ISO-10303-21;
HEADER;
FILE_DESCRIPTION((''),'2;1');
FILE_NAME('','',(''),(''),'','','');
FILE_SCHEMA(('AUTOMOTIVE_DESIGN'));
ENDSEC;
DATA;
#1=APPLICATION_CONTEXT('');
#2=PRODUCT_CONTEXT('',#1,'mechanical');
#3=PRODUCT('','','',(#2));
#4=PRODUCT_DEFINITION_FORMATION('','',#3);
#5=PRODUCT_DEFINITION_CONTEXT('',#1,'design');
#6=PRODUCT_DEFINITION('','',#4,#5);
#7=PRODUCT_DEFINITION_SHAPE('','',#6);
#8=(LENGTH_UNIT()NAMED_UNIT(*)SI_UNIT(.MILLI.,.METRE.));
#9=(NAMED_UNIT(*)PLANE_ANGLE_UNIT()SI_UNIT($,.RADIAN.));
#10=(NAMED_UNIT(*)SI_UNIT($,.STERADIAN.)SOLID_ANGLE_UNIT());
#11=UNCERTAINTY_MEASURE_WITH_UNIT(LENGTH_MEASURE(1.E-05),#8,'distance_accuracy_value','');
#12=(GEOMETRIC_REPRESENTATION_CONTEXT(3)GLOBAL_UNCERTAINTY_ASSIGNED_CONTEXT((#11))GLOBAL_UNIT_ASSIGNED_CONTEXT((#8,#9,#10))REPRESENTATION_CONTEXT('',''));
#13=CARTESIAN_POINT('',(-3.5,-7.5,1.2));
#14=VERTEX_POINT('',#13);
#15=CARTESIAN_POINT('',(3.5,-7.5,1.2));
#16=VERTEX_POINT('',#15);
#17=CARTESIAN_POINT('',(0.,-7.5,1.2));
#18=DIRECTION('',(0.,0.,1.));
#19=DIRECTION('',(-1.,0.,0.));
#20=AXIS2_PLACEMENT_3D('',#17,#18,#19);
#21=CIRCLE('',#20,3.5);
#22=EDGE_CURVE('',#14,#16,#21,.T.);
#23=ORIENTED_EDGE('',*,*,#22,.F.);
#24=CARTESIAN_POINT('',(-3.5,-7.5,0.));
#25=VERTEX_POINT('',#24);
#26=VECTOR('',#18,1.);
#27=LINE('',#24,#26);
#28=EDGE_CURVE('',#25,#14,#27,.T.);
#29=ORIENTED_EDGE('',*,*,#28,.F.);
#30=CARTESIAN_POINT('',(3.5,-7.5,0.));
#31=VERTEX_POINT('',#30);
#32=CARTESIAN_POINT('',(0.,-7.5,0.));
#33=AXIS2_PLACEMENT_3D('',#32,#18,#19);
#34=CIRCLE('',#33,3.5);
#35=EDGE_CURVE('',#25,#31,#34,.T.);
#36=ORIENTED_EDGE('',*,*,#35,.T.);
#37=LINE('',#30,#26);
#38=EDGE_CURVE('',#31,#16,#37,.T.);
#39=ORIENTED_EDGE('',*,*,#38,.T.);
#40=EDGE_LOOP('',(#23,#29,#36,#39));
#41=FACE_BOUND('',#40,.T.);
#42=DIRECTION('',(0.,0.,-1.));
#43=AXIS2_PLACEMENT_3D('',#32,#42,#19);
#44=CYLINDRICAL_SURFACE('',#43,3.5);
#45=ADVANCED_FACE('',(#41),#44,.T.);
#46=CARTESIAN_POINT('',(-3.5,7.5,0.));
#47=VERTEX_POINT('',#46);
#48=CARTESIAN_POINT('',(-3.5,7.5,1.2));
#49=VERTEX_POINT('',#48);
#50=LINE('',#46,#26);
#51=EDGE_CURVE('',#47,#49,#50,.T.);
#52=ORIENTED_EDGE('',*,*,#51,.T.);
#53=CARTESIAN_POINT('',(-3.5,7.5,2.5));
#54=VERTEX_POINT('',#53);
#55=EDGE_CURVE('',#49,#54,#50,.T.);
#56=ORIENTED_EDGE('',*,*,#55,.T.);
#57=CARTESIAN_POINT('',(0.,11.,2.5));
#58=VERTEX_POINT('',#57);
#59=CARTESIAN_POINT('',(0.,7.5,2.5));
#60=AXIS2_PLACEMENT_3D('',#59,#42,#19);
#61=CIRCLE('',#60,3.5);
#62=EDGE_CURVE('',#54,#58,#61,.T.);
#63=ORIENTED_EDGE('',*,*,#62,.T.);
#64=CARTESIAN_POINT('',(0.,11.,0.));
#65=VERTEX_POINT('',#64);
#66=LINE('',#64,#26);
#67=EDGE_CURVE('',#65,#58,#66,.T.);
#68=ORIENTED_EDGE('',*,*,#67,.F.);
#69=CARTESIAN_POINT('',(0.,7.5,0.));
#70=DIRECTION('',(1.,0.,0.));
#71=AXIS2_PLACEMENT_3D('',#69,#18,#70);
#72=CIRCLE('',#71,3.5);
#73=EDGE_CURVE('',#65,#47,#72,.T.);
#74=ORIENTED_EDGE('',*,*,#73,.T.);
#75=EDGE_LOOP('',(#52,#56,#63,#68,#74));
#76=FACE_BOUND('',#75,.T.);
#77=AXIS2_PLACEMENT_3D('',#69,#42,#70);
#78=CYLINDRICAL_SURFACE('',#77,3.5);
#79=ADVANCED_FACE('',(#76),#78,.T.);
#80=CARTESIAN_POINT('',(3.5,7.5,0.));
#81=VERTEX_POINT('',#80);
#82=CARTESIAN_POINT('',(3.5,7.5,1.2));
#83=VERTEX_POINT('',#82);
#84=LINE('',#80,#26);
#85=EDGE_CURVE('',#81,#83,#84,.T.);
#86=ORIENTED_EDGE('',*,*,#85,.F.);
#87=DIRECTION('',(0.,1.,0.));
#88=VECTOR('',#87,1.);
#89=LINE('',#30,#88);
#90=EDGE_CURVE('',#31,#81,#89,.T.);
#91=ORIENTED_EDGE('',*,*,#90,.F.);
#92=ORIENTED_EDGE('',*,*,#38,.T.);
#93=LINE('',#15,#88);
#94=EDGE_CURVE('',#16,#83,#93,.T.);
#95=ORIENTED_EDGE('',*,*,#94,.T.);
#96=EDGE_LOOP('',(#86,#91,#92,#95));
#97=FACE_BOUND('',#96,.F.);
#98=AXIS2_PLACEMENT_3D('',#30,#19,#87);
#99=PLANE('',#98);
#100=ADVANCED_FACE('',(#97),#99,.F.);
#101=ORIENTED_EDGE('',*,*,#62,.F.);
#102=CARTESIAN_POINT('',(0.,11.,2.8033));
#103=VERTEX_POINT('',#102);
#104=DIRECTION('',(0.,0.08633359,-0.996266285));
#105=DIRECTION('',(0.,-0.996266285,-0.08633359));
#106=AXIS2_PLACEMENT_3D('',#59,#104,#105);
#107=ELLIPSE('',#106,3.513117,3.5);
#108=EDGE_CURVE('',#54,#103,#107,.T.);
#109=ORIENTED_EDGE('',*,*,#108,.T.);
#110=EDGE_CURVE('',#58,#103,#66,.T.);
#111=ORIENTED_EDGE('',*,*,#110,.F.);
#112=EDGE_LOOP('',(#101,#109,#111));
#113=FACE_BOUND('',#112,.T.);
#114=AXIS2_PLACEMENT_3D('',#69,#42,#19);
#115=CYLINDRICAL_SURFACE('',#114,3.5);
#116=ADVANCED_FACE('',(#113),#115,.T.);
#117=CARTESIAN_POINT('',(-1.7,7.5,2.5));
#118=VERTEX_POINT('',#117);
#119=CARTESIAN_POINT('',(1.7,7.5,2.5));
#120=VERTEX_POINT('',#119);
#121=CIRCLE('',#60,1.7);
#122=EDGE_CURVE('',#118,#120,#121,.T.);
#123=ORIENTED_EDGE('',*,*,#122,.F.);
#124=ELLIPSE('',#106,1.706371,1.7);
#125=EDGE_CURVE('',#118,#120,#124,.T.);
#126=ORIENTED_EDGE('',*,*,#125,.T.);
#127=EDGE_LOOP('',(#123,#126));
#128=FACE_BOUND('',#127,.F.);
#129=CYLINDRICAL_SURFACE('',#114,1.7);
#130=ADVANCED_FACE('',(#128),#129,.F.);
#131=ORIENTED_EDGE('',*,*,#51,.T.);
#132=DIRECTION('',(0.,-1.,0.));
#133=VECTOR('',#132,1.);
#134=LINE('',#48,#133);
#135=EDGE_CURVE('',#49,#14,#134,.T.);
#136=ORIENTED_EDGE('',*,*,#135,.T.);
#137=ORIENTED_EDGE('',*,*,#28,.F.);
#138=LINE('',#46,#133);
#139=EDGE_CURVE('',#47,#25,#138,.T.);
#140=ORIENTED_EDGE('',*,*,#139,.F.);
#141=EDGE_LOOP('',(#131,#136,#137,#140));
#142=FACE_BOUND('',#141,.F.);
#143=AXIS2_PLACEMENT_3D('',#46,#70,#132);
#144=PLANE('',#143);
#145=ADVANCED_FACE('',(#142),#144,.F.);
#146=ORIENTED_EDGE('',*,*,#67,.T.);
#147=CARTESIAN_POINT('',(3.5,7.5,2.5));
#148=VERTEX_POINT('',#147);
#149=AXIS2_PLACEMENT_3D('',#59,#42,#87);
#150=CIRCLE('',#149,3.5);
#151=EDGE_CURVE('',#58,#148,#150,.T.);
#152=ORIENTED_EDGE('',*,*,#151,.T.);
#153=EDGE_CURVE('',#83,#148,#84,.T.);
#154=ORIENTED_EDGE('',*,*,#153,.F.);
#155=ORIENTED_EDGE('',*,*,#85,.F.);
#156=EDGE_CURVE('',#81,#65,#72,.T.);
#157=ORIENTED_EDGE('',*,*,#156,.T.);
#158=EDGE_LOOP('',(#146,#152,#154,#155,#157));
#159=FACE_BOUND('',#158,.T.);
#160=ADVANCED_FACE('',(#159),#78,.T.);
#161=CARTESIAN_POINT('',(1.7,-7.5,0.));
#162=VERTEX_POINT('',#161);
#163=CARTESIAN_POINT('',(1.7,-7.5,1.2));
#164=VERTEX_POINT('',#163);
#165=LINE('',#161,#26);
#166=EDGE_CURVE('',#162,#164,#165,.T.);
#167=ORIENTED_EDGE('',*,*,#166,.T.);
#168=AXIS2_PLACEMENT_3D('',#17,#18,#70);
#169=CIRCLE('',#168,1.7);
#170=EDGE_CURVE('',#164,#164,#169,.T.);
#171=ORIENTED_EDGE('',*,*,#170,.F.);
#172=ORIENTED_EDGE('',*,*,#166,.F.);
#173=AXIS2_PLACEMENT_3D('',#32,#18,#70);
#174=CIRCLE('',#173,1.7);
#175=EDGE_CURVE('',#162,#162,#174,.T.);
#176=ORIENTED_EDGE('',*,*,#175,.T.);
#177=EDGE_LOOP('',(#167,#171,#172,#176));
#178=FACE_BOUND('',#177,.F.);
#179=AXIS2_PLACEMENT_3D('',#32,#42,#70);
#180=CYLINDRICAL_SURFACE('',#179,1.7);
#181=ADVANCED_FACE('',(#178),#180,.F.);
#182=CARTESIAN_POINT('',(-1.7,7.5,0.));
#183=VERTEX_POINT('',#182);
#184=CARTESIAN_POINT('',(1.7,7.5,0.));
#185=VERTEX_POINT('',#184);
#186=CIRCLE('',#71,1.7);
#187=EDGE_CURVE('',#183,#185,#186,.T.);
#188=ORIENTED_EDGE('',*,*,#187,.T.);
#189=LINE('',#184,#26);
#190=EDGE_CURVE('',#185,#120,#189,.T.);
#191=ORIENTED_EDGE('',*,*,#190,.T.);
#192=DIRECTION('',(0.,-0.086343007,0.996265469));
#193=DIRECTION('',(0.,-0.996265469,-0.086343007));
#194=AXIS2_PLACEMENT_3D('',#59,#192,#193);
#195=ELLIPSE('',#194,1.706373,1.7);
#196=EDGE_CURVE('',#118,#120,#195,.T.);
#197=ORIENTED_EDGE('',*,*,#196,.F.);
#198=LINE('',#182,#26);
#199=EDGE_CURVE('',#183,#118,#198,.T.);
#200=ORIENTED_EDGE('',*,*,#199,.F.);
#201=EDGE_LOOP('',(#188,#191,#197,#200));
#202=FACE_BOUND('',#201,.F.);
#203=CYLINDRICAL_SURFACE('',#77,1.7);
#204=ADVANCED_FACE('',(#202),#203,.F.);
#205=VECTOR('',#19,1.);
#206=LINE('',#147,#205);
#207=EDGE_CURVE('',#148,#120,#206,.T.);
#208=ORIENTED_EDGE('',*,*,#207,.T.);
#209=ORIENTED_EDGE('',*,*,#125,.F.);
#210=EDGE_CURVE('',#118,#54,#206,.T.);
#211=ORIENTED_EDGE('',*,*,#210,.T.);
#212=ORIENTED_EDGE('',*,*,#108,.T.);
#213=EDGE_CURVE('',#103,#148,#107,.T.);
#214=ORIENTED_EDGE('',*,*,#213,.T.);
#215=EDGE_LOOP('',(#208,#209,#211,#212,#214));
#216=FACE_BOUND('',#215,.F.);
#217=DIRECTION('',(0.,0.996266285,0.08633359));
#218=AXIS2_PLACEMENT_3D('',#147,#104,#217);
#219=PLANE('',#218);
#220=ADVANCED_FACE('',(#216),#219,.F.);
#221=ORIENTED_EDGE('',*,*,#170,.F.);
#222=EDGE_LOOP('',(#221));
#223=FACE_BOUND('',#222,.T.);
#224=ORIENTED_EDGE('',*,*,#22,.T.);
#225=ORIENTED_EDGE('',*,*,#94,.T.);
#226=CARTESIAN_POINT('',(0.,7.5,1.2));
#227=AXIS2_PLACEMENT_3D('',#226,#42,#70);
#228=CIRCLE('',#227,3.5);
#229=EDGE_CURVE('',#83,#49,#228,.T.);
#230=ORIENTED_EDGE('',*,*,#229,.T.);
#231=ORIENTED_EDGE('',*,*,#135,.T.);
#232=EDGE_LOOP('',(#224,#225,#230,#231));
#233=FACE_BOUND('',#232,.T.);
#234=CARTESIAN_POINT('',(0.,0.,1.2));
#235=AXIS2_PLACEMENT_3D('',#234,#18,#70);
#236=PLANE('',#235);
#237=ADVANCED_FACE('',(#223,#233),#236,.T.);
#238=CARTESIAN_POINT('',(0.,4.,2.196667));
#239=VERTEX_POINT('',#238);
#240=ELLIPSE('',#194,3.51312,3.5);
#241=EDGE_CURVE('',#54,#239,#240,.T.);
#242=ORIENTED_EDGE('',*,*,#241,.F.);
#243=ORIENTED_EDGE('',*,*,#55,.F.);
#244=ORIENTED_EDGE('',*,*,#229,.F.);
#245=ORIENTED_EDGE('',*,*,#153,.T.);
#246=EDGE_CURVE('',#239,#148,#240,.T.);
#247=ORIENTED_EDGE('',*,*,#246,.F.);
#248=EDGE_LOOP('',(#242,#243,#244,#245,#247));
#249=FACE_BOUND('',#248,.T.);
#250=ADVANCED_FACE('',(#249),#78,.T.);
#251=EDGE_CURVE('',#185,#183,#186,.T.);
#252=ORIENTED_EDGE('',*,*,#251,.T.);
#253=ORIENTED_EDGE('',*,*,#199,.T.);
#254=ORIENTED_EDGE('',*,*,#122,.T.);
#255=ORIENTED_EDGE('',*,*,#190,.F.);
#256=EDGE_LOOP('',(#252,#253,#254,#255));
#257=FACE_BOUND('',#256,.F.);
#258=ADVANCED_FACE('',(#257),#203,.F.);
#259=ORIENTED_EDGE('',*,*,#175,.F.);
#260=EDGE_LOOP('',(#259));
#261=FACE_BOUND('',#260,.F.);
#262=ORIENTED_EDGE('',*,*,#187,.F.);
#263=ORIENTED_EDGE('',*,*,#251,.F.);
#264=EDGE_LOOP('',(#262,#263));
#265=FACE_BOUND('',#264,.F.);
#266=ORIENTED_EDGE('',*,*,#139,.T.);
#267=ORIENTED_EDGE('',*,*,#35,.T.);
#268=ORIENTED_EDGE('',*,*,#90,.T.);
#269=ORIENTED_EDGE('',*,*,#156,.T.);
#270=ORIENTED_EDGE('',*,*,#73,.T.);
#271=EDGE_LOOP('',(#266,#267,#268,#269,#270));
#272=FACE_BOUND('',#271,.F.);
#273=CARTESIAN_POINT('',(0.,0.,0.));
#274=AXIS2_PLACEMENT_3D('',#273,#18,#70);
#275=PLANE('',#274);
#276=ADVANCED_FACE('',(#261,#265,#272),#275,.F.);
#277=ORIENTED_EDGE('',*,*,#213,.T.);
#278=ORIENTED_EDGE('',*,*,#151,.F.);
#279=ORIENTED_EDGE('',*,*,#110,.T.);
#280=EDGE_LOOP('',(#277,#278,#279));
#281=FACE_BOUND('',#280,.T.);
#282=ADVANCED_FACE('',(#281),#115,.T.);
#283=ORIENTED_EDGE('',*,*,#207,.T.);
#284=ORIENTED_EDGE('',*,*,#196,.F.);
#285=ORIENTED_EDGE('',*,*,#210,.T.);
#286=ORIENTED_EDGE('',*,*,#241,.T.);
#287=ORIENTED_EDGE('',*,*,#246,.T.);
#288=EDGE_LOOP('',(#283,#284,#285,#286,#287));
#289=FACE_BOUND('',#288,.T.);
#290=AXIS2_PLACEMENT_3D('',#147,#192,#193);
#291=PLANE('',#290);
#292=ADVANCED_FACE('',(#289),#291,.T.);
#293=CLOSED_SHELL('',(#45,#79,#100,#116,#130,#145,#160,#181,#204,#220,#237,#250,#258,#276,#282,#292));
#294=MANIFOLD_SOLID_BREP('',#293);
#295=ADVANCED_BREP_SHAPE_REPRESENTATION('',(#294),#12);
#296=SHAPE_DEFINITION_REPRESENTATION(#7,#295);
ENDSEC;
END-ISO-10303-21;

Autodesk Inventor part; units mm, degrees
ref_plane "YZ Plane" through (0, 0, 0) normal (1, 0, 0) x (0, 1, 0)
ref_plane "XZ Plane" through (0, 0, 0) normal (0, 1, 0) x (-1, 0, 0)
ref_plane "XY Plane" through (0, 0, 0) normal (0, 0, 1) x (1, 0, 0)
sketch "Náčrt1" plane through (0, 0, 0) normal (0, 0, 1) x (1, 0, 0)
  line L0 (0, 7.5) -> (0, -7.5) construction
  line L1 (-3.5, 7.5) -> (-3.5, -7.5)
  line L2 (3.5, -7.5) -> (3.5, 7.5)
  arc A0 (3.5, 7.5) -> (-3.5, 7.5) centre (0, 7.5) ccw
  arc A1 (-3.5, -7.5) -> (3.5, -7.5) centre (0, -7.5) ccw
  circle A2 centre (0, 7.5) radius 1.7
  circle A3 centre (0, -7.5) radius 1.7
  circle A4 centre (0, 7.5) radius 3.5
  point P0 (0, 0)
  point P1 (0, 0)
  point P2 (3.5, 7.5)
  dimension "d0" = 15
  dimension "d1" = 3.5
  dimension "d2" = 3.4
extrude "Vysunutí1" add sketch "Náčrt1" along normal blind 1.2
extrude "Vysunutí2" add sketch "Náčrt1" along normal blind 2.5 contours A0 A4
sketch "Náčrt4" plane through (3.5, -7.5, 0) normal (1, 0, 0) x (0, 0, -1)
  line L0 (-2.5, 13.3) -> (-2.5, 16.7) projected
  line L1 (-1.2, -1.7) -> (-1.2, 1.7) projected
  line L2 (-2.5, 15) -> (-1.2, 0)
  line L3 (-2.5, 18.5) -> (-2.5, 11.5) projected
  line L4 (0, 15) -> (0, 15) projected
  line L5 (0, 15) -> (-1.2, 15) projected
  line L6 (-1.2, 15) -> (-1.2, 15) projected
  line L7 (0, 15) -> (-1.2, 15) projected
  line L8 (-1.2, 11.5) -> (-2.5, 11.5) projected
  line L9 (-2.5, 15) -> (-2.8033, 18.5)
  line L10 (-2.5, 18.5) -> (-2.8033, 18.5)
  point P0 (0, 7.5)
  point P1 (-2.1967, 11.5)
extrude "Vysunutí3" cut sketch "Náčrt4" against normal through all contours L0 L2 L8 L3
extrude "Vysunutí4" add sketch "Náčrt4" against normal up to surface (7 mm away) contours L9 L10 L3 L0
sketch "Náčrt5" plane through (0, 0, 0) normal (0, 0, -1) x (-1, 0, 0)
  circle A0 centre (0, 7.5) radius 1.7 projected
  circle A1 centre (0, -7.5) radius 1.7 projected
  line L0 (-3.5, -7.5) -> (-3.5, 7.5) projected
  arc A2 (-3.5, -7.5) -> (3.5, -7.5) centre (0, -7.5) ccw projected
  line L1 (3.5, 7.5) -> (3.5, -7.5) projected
  arc A3 (3.5, 7.5) -> (-3.5, 7.5) centre (0, 7.5) ccw projected
  arc A4 (1.7, 7.5) -> (-1.7, 7.5) centre (0, 7.5) ccw projected
  line L2 (-1.7, 7.5) -> (1.7, 7.5) projected
  arc A5 (3.5, 7.5) -> (0, 11) centre (0, 7.5) ccw projected
  line L3 (3.5, 11) -> (3.5, 7.5) projected
  line L4 (0, 11) -> (3.5, 11) projected
  arc A6 (0, 11) -> (-3.5, 7.5) centre (0, 7.5) ccw projected
  line L5 (-3.5, 11) -> (0, 11) projected
  line L6 (-3.5, 7.5) -> (-3.5, 11) projected
  point P0 (0, 0)
  point P1 (3.5, 7.5)
  point P2 (0, 11)
  point P3 (0, 11)
  point P4 (0, 11)
  point P5 (-3.5, 7.5)
  point P6 (-1.7, 7.5)
  point P7 (1.7, 7.5)
extrude "Vysunutí5" cut sketch "Náčrt5" against normal through all contours L2 A0 | L6 L5 A3 | L4 L3 A3 picked at (0.5018, 7.7633)
properties part number "back qre flex holder"
